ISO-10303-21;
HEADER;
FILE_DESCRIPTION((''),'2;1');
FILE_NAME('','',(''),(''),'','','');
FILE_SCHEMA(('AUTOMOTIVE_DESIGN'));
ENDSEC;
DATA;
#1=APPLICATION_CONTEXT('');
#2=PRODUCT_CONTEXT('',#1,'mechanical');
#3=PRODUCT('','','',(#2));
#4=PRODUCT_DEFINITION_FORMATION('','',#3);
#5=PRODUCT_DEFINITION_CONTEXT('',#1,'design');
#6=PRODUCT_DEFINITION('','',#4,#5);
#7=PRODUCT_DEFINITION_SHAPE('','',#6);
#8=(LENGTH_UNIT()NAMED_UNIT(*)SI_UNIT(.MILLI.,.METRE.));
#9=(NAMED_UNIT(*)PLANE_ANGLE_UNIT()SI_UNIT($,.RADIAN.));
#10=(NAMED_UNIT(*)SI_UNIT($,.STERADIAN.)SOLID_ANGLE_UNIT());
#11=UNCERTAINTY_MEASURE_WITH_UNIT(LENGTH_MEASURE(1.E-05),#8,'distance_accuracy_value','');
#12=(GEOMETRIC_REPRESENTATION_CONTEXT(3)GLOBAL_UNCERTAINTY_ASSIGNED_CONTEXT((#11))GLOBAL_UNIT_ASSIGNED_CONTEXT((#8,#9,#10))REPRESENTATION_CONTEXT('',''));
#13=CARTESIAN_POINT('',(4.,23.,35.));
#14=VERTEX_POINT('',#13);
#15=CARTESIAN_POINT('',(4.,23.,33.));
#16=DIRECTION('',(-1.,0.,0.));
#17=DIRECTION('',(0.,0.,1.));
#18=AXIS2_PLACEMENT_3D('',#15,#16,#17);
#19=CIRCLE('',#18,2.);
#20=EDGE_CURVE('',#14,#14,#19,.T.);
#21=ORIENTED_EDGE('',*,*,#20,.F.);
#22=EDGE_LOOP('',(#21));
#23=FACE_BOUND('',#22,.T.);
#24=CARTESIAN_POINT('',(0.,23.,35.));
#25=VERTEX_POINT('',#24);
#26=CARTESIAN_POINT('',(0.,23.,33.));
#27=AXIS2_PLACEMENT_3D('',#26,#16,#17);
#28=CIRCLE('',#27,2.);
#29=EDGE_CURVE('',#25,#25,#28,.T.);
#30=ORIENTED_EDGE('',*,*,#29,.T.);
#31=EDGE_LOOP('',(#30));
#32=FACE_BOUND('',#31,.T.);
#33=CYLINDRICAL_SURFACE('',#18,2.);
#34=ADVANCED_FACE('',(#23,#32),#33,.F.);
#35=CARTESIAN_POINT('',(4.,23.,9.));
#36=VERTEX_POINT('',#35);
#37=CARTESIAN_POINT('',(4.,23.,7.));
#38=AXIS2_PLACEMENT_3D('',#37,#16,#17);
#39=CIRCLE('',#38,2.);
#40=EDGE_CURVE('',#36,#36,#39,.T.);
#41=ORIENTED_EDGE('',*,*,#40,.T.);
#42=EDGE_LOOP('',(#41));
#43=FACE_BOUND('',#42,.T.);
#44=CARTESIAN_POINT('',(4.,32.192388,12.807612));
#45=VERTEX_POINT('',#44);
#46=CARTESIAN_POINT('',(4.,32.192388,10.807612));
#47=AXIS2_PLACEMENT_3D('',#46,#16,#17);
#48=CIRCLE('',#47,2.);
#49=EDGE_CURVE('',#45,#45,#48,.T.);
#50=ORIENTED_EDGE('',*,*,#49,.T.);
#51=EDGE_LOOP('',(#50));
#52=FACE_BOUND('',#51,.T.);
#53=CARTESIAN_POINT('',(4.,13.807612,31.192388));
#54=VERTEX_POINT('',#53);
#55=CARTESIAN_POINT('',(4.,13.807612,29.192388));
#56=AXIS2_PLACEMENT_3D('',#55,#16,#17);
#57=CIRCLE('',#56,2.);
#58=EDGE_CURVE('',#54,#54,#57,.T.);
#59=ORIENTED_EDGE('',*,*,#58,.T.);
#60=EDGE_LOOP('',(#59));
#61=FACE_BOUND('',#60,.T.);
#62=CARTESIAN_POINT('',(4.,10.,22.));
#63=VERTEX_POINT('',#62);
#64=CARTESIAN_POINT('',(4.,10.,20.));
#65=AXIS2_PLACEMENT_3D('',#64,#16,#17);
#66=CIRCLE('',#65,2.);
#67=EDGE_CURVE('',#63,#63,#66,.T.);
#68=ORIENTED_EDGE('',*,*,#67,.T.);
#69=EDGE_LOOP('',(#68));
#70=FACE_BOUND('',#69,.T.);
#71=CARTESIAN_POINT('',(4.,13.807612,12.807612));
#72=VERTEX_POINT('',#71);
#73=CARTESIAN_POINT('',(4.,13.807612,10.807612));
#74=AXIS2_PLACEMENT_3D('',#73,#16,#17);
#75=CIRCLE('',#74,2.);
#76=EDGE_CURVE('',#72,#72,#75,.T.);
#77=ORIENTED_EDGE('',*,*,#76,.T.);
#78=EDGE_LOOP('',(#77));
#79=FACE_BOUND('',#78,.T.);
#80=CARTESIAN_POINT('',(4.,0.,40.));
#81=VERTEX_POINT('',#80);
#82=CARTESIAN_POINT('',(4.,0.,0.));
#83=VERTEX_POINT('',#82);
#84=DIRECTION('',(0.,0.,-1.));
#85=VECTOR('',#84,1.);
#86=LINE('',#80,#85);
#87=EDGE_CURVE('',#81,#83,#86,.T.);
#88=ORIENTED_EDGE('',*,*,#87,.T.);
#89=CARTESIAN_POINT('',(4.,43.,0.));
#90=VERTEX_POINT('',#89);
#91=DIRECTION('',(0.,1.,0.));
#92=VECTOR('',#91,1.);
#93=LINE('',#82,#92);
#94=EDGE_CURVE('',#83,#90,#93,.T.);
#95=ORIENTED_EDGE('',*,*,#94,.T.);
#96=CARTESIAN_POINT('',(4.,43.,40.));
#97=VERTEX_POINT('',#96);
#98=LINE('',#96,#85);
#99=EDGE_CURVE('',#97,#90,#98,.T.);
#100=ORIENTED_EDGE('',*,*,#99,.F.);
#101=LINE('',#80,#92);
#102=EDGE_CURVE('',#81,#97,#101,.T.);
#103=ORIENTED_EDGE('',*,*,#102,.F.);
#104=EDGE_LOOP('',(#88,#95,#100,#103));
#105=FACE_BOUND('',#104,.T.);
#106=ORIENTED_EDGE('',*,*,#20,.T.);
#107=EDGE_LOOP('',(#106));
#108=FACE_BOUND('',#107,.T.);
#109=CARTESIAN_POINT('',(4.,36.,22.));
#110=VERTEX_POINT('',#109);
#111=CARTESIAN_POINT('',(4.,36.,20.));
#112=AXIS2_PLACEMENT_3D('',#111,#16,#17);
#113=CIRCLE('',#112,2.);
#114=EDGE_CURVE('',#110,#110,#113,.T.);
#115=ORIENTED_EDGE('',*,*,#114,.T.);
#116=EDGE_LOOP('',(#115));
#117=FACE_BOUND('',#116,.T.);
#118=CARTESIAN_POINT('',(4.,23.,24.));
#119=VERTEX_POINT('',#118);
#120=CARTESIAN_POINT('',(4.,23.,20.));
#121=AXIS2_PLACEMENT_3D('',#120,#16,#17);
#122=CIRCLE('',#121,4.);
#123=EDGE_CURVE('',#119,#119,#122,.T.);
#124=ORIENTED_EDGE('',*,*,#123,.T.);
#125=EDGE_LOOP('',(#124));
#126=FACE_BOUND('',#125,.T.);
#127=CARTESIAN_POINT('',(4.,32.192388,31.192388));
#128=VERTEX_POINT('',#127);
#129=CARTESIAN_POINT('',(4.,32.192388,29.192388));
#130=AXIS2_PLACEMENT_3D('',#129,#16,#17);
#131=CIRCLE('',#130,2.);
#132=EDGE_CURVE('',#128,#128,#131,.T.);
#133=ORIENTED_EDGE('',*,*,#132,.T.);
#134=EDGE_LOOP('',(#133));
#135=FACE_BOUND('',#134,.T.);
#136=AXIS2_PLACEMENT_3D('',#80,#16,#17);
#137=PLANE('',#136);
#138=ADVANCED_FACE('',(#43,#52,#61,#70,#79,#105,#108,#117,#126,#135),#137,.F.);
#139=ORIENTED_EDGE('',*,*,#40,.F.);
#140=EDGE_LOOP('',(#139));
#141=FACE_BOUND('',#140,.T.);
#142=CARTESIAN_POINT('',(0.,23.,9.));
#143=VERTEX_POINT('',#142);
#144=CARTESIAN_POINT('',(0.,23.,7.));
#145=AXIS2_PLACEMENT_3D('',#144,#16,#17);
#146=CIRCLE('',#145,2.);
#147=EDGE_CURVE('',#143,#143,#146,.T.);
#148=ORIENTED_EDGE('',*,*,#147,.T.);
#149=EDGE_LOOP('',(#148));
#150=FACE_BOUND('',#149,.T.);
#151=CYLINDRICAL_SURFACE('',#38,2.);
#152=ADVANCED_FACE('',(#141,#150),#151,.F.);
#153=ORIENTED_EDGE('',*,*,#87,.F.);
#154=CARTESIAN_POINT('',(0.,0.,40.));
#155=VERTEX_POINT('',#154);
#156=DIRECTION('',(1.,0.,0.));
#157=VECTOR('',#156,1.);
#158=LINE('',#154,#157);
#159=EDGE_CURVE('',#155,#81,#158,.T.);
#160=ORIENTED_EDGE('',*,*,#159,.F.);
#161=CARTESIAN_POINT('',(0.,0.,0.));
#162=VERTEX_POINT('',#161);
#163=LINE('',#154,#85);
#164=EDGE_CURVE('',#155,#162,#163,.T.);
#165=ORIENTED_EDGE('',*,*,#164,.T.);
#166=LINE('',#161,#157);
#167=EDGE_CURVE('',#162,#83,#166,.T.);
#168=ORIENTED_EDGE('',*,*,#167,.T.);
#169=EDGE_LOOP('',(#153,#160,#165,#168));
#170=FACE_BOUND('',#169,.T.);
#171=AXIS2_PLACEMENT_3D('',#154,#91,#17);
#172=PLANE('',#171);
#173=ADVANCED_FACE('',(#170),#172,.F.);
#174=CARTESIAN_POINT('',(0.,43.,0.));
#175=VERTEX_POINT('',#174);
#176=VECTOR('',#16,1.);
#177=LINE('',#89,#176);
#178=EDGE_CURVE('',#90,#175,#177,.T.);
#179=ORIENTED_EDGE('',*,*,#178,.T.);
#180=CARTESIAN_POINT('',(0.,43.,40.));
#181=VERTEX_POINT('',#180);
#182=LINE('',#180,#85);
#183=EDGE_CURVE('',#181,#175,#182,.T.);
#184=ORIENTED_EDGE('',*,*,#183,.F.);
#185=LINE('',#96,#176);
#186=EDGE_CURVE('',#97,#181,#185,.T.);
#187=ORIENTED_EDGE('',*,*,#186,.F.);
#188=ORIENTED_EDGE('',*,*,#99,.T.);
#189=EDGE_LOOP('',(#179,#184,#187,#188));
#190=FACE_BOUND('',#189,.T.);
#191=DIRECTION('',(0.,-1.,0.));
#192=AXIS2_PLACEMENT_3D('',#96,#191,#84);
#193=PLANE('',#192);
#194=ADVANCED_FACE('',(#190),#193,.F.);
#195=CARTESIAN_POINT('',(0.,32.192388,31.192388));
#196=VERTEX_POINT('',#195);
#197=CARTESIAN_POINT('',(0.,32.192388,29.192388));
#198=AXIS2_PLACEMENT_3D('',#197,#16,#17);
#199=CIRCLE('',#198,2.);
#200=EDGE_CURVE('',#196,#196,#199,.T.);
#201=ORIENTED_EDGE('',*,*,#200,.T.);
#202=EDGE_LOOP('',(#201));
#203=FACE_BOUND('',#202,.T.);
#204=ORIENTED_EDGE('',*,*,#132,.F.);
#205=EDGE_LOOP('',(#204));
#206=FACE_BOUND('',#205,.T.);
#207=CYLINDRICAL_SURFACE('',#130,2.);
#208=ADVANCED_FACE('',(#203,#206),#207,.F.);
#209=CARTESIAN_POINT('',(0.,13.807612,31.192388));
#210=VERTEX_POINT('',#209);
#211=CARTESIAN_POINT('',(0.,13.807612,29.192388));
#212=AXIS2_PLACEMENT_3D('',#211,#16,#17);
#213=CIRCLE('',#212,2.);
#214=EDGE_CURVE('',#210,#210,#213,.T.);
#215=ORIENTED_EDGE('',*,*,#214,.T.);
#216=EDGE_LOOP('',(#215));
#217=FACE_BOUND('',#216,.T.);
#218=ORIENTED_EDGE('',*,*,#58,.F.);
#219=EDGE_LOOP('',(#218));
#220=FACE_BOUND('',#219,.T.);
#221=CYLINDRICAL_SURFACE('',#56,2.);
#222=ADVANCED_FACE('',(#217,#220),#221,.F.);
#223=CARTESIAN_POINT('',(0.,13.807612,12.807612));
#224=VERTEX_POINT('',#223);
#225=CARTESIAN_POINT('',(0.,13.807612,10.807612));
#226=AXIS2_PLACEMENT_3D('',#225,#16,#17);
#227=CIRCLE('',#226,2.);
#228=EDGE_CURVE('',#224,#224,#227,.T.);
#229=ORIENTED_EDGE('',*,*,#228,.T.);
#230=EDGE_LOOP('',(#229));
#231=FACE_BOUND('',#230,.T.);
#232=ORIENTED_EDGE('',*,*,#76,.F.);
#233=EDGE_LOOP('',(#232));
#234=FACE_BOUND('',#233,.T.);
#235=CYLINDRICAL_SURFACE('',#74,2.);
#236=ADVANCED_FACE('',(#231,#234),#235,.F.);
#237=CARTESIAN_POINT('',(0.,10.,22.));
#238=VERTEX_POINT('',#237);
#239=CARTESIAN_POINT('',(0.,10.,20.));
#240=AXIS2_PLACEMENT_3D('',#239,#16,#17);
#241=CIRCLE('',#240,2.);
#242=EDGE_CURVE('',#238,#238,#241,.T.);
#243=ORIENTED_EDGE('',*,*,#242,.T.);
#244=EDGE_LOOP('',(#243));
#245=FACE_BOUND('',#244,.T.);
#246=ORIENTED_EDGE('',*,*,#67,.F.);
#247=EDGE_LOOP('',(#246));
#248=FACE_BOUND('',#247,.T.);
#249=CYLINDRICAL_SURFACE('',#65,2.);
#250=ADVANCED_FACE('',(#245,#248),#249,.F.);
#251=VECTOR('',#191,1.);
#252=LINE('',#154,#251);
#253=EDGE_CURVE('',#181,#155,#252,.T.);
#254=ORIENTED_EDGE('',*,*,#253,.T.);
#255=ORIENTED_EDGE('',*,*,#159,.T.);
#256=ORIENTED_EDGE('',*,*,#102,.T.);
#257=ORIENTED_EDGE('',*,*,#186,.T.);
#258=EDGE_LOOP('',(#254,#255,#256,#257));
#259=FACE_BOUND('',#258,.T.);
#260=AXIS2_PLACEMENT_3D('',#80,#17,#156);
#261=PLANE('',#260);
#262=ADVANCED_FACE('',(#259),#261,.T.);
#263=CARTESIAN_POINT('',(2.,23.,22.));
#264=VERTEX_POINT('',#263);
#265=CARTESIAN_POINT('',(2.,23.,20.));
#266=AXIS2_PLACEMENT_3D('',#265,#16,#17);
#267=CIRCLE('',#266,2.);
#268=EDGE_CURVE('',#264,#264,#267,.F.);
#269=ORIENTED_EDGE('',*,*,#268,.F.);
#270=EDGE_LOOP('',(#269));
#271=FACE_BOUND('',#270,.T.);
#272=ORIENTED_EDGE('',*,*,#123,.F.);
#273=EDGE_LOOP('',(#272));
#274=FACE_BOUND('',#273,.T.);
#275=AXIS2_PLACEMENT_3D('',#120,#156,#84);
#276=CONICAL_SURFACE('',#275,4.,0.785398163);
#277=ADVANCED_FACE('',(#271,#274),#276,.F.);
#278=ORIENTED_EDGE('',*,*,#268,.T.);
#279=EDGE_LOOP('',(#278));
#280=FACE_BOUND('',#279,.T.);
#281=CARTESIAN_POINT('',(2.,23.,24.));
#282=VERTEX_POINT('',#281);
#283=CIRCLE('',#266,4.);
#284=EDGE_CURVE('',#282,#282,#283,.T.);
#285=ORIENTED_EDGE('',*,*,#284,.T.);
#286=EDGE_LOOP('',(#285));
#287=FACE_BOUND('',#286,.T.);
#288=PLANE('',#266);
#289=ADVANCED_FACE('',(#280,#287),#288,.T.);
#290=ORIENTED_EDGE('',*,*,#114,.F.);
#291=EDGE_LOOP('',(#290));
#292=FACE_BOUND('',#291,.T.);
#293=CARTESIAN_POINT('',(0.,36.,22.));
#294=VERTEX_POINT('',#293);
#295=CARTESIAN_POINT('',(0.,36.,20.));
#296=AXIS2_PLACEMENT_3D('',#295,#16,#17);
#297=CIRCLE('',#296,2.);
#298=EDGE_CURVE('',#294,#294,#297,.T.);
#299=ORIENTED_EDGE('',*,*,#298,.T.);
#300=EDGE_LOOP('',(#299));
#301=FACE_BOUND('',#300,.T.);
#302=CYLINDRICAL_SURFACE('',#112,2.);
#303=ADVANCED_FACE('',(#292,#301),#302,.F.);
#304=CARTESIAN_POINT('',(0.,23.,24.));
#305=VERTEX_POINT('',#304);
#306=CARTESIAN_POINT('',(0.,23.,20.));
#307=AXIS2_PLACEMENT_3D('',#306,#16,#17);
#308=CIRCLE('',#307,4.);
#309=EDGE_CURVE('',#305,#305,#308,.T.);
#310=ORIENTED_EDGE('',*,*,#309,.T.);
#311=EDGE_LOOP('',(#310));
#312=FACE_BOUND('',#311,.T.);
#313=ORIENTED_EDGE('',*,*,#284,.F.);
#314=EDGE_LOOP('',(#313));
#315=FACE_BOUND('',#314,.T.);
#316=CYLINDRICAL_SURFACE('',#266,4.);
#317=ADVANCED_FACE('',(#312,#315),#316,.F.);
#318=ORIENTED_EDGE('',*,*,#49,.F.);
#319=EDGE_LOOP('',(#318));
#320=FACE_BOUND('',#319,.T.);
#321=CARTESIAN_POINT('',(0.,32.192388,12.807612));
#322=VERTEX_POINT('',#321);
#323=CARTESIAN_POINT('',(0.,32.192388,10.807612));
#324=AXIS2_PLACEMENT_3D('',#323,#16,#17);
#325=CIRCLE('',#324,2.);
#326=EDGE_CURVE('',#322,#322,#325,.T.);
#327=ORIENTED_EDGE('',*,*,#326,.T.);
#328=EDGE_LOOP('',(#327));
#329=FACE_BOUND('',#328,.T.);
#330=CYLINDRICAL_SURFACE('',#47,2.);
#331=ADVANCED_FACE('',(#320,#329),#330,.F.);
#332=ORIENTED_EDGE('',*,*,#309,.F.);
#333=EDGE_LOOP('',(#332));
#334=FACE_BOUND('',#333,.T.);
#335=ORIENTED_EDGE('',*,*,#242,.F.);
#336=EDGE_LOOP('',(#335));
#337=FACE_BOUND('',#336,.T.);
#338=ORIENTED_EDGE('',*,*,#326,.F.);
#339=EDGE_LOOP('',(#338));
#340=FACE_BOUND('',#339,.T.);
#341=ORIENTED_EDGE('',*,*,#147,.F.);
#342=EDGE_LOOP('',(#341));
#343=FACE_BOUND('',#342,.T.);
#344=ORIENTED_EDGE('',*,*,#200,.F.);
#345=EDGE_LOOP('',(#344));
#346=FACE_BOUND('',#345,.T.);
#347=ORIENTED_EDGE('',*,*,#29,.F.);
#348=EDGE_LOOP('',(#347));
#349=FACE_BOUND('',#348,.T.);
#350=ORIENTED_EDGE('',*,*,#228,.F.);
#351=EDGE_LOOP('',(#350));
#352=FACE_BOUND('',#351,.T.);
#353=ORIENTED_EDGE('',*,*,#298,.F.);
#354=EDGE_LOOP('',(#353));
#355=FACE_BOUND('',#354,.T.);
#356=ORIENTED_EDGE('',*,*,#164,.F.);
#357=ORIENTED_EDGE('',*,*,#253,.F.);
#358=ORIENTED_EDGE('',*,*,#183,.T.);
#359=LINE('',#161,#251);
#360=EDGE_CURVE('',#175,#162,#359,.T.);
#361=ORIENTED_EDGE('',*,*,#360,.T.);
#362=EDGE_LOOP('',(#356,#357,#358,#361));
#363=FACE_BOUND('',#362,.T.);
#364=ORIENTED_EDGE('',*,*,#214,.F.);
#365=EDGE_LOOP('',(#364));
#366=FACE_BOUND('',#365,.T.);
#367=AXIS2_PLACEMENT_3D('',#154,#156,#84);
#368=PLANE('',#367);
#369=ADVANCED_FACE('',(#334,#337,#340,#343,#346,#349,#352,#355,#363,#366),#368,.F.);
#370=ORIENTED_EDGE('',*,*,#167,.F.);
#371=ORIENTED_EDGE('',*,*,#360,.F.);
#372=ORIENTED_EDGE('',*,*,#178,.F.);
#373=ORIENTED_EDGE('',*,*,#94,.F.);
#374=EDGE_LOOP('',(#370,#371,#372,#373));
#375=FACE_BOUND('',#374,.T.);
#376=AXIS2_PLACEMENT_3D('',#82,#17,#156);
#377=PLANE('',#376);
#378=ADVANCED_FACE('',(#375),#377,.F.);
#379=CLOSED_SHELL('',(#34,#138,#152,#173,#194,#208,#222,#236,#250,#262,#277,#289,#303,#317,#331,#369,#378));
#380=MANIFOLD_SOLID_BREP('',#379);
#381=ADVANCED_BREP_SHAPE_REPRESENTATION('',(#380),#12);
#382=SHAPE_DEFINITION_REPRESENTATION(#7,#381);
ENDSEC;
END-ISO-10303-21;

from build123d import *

# Parameters (mm, degrees)
ESQUISSE1_W      = 4
ESQUISSE1_H      = 43
EXTRUSION1_DEPTH = 40
ESQUISSE2_R      = 2
EXTRUSION2_DEPTH = 59.864250611
ESQUISSE3_R      = 4
EXTRUSION3_DEPTH = 2
CHANFREIN1_SIZE  = 2


with BuildPart() as part:
    # Esquisse1 → Extrusion1 (new body)
    with BuildSketch(Plane.XY):
        with Locations((2, 21.5)):
            Rectangle(ESQUISSE1_W, ESQUISSE1_H)
    extrude(amount=EXTRUSION1_DEPTH)

    # Esquisse2 → Extrusion2 (cut, through all)
    with BuildSketch(Plane.ZY):
        with Locations((29.192388155, 32.192388155)):
            Circle(ESQUISSE2_R)
        with Locations((20, 23)):
            Circle(ESQUISSE2_R)
        with Locations((20, 36)):
            Circle(ESQUISSE2_R)
        with Locations((33, 23)):
            Circle(ESQUISSE2_R)
        with Locations((29.192388155, 13.807611845)):
            Circle(ESQUISSE2_R)
        with Locations((20, 10)):
            Circle(ESQUISSE2_R)
        with Locations((10.807611845, 13.807611845)):
            Circle(ESQUISSE2_R)
        with Locations((7, 23)):
            Circle(ESQUISSE2_R)
        with Locations((10.807611845, 32.192388155)):
            Circle(ESQUISSE2_R)
    extrude(amount=-EXTRUSION2_DEPTH, mode=Mode.SUBTRACT)

    # Esquisse3 → Extrusion3 (cut)
    with BuildSketch(Plane.ZY):
        with Locations((20, 23)):
            Circle(ESQUISSE3_R)
    extrude(amount=-EXTRUSION3_DEPTH, mode=Mode.SUBTRACT)

    # Chanfrein1
    chanfrein1_edges = [part.edges().sort_by_distance(p)[0] for p in [
        (4, 23, 18),
    ]]
    chamfer(chanfrein1_edges, length=CHANFREIN1_SIZE - 0.0001)  # a hair under: the kernel refuses the full size


solid = part.part
